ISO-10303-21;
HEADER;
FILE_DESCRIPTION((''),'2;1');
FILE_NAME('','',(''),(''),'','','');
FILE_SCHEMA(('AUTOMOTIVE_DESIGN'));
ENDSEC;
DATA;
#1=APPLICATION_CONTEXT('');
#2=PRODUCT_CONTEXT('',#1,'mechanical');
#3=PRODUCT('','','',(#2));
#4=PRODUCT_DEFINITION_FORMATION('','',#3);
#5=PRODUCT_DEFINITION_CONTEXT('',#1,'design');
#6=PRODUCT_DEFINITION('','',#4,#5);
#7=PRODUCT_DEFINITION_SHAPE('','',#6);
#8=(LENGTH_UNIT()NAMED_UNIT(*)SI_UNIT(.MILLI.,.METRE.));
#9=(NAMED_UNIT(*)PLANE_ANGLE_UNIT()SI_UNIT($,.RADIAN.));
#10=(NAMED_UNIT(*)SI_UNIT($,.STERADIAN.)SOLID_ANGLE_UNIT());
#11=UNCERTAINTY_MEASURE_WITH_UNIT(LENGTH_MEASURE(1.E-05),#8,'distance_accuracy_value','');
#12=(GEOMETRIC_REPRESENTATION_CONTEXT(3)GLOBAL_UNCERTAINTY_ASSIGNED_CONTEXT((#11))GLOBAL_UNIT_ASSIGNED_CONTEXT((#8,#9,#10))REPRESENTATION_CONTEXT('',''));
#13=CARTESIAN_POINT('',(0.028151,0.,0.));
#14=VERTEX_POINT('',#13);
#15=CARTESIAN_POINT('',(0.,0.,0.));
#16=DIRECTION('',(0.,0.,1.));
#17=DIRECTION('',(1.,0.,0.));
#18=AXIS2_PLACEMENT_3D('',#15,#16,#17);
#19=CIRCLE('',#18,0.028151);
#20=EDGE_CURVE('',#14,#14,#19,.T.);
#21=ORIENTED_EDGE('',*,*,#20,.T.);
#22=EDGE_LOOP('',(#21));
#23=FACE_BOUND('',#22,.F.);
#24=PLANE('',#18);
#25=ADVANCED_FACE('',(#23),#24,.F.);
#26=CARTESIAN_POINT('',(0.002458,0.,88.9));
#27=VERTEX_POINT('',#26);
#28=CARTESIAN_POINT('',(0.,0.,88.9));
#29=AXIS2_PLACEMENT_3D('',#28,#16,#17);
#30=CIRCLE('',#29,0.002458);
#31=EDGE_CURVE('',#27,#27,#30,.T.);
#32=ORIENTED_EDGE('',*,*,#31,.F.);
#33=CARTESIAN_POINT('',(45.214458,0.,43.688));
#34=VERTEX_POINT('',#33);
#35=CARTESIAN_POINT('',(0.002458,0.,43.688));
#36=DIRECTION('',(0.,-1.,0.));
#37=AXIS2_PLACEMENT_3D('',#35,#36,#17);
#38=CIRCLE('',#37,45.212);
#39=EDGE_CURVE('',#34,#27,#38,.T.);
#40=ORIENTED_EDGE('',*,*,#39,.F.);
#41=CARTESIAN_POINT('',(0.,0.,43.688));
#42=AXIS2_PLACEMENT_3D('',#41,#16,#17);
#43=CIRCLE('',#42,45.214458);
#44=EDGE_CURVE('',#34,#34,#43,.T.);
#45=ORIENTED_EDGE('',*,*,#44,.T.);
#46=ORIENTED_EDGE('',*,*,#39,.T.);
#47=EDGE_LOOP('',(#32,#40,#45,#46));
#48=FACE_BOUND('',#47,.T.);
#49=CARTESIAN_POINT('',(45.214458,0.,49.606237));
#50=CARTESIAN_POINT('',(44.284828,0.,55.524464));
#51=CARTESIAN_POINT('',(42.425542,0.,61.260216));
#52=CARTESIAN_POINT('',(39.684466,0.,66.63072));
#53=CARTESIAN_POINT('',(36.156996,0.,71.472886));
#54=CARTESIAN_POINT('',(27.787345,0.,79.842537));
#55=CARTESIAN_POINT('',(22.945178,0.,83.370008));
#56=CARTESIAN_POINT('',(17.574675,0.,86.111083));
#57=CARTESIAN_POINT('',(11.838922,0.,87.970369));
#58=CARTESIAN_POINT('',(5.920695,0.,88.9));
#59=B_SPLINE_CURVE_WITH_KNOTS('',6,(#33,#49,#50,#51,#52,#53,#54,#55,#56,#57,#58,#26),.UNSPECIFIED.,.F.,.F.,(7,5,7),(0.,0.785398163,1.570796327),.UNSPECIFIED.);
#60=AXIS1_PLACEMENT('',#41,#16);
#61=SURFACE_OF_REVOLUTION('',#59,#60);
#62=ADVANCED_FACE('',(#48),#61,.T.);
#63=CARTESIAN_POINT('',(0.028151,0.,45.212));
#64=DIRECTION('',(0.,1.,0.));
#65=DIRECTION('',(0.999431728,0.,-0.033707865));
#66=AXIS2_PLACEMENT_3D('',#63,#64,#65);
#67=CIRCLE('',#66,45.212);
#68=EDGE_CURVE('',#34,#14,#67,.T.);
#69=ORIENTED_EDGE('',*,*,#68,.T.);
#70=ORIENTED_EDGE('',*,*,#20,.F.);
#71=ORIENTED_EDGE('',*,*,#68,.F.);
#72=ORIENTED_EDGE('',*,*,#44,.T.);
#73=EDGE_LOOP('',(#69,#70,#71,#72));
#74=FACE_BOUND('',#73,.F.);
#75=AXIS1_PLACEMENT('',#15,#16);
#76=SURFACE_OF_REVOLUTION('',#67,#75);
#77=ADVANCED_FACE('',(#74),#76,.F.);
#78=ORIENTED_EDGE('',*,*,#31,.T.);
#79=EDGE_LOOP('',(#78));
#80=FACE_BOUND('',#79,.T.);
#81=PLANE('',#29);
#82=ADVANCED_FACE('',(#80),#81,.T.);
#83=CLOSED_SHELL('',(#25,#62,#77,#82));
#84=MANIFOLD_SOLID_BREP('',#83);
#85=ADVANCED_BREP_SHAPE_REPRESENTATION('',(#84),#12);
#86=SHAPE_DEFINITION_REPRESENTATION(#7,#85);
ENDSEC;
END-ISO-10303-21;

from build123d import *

# Parameters (mm, degrees)
F0_R     = 45.214458384
F1_DEPTH = 88.9
F2_R     = 45.212


# Not quite as in the source:
# - a fillet or chamfer that OpenCascade refuses, or shapes differently, is made with other operations: its cross-section is extruded or revolved along the edge and cut away or added


with BuildPart() as f1:
    # F0 (on Top) → F1 (new body)
    with BuildSketch(Plane.XY):
        Circle(F0_R)
    extrude(amount=F1_DEPTH)

    # F2
    f2_edges = [f1.edges().sort_by_distance(p)[0] for p in [
        (-45.214458, 0, 88.9),
    ]]
    fillet(f2_edges, radius=F2_R)

    # F3: fillet of radius 45.212 on 1 edges, made by hand

    # F3_s1 → F3_t2 (revolve, cut)
    with BuildSketch(Plane.XZ):
        with BuildLine():
            ThreePointArc((45.214458384, 43.688), (31.4544287444, 12.7079384692), (0.0281510775, 0))
            Line((0.0281510775, 0), (0.0281510775, -0.90424))
            Line((0.0281510775, -0.90424), (45.214458384, -0.90424))
            Line((45.214458384, -0.90424), (46.118698384, 0))
            ThreePointArc((46.118698384, 0), (46.118698384, 21.844), (46.1181845301, 43.65752))
            Line((46.1181845301, 43.65752), (45.214458384, 43.688))
        make_face()
    revolve(axis=Axis((0, 0, 0), (0, 0, 1)), mode=Mode.SUBTRACT)


solid = f1.part
